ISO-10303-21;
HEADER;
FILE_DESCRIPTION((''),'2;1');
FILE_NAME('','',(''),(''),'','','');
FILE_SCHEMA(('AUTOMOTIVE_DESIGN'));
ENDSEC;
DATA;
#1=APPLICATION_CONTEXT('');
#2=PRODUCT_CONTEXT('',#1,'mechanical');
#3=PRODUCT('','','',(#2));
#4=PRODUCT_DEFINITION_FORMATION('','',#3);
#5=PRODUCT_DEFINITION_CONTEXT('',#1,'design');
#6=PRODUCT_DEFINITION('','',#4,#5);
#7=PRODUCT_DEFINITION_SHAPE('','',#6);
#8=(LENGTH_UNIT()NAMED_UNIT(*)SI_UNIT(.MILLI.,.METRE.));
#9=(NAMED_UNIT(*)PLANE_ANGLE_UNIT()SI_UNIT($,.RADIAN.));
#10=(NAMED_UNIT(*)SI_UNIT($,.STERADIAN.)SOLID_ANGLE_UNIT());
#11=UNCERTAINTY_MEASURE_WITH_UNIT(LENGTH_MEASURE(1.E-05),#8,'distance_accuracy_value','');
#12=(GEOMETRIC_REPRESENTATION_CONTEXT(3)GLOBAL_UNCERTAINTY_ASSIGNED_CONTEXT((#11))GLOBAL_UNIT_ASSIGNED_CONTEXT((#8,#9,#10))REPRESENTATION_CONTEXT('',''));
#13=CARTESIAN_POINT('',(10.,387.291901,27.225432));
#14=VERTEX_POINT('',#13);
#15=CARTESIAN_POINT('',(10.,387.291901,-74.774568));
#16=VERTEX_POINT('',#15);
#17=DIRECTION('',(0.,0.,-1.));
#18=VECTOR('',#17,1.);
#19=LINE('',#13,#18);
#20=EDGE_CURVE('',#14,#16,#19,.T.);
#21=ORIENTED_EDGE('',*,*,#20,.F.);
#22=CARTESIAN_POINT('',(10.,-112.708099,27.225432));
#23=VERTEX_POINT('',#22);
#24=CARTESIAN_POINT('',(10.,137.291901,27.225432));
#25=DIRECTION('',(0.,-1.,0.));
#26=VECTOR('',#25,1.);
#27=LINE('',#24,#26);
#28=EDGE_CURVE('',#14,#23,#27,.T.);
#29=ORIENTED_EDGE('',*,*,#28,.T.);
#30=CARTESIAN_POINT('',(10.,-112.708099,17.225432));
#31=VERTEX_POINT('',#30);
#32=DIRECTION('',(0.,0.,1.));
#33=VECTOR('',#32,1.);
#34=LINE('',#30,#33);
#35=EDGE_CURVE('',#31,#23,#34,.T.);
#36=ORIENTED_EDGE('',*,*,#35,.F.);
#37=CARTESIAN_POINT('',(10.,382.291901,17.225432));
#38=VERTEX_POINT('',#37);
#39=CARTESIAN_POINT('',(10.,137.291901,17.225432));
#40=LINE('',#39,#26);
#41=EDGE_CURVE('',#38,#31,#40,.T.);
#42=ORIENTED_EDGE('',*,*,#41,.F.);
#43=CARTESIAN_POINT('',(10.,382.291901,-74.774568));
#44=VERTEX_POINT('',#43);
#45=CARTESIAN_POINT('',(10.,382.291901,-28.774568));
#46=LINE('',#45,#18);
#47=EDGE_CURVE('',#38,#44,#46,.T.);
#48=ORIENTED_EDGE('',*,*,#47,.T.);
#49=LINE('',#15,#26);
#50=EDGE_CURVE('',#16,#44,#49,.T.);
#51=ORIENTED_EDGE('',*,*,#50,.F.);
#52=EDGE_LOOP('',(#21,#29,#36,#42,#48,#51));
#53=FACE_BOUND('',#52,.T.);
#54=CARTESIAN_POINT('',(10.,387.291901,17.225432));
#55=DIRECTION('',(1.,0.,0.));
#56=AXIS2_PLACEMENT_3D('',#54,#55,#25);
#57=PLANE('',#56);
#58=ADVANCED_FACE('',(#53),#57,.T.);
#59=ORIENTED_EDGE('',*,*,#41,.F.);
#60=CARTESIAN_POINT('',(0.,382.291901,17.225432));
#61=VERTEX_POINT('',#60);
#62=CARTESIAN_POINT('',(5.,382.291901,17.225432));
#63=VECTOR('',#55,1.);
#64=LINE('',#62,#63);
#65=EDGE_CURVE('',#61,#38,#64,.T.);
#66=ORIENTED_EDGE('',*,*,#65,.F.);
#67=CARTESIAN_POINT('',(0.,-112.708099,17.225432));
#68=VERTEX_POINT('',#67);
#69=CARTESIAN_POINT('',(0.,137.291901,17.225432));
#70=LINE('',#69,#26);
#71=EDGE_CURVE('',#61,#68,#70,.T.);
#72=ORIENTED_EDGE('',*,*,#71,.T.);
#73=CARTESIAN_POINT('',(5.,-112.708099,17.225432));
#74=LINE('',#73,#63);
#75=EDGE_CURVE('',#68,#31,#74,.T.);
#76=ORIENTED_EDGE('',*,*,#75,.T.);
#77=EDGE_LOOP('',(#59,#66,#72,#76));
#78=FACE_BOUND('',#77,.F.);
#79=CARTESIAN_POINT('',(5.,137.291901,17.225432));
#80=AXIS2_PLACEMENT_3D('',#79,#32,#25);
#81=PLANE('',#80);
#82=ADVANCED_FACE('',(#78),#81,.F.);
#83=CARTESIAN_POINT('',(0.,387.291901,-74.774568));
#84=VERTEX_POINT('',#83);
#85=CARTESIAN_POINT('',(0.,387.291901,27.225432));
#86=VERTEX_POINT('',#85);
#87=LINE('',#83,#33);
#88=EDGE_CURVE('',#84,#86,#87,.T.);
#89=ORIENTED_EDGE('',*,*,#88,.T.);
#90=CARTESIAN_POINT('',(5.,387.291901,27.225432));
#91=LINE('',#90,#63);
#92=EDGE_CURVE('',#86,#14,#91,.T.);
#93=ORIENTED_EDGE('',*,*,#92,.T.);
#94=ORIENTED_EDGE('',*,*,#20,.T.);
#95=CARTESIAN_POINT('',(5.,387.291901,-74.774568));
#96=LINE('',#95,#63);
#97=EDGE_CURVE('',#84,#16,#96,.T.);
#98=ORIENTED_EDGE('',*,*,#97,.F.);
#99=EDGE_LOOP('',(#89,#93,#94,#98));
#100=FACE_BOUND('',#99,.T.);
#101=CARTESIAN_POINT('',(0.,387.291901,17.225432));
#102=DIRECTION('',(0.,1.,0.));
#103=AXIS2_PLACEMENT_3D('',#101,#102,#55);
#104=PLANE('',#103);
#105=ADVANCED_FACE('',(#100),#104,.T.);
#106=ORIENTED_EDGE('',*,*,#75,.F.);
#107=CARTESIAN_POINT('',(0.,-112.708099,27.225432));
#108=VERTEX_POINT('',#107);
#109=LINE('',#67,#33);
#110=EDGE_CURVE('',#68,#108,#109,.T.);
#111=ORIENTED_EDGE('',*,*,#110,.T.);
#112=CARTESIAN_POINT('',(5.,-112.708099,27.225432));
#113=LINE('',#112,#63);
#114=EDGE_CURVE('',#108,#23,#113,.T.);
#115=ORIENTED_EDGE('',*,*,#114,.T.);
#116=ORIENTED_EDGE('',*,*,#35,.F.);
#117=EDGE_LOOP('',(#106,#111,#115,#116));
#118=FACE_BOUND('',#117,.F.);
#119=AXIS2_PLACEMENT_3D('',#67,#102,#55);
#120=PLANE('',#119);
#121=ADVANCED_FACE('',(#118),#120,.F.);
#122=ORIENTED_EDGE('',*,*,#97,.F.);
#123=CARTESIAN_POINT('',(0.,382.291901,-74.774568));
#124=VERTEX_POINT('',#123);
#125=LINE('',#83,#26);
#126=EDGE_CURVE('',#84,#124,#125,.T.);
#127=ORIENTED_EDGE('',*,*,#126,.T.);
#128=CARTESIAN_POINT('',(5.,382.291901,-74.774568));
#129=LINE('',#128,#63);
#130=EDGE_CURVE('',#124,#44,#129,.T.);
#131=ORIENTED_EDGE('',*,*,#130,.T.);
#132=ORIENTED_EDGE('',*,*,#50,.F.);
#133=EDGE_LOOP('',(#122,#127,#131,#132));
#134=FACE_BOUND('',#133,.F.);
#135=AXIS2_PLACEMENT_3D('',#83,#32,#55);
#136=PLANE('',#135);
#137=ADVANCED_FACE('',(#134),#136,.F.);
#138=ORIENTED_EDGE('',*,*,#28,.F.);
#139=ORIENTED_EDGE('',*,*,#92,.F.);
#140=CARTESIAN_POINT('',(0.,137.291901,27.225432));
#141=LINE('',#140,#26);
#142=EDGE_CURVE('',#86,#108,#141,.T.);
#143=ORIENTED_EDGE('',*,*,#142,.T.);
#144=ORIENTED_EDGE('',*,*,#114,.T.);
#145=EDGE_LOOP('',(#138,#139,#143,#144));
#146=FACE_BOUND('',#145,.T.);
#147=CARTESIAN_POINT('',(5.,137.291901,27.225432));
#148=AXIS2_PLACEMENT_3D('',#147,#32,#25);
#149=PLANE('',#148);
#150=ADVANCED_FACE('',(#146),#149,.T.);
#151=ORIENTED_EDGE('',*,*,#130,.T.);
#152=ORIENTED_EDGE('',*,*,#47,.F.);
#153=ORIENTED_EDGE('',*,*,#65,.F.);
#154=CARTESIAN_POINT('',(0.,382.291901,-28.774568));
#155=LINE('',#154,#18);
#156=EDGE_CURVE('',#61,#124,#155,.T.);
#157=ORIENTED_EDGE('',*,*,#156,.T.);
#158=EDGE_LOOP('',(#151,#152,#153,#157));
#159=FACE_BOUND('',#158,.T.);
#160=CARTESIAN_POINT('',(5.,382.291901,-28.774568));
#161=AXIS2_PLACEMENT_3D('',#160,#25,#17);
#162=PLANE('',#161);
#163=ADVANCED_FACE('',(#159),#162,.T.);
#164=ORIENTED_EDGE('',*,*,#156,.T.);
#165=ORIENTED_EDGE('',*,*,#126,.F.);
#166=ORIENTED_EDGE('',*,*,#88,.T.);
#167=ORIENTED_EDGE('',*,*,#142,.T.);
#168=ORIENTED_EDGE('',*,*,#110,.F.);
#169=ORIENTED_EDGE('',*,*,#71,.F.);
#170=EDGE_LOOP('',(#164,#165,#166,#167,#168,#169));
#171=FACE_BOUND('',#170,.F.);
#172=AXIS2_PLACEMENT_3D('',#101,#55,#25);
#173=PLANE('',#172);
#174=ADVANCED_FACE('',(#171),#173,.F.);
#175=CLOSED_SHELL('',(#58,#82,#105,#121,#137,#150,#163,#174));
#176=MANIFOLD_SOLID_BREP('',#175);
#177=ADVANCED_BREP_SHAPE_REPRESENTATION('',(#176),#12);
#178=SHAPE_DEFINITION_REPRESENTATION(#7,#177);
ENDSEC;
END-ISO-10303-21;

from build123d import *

# Parameters (mm, degrees)
F1_E0_W  = 92
F1_E0_H  = 10
F2_DEPTH = 5
F3_E1_W  = 500
F3_E1_H  = 10
F4_DEPTH = 10


# Not quite as in the source:
# - the program builds the solid bodies; features that only make, move or delete a surface that nothing else refers to are left out


with BuildPart() as f2:
    # F1_E0 (on explicit) → F2 (new body)
    with BuildSketch(Plane(origin=(0, 387.2919008136, 17.2254323959), x_dir=(0, 0, -1), z_dir=(0, -1, 0))):
        with Locations((46, 5)):
            Rectangle(F1_E0_W, F1_E0_H)
    extrude(amount=F2_DEPTH)

    # F3_E1 (on explicit) → F4 (join)
    with BuildSketch(Plane(origin=(0, 387.2919008136, 17.2254323959), x_dir=(0, -1, 0), z_dir=(0, 0, 1))):
        with Locations((250, 5)):
            Rectangle(F3_E1_W, F3_E1_H)
    extrude(amount=F4_DEPTH)


solid = f2.part
